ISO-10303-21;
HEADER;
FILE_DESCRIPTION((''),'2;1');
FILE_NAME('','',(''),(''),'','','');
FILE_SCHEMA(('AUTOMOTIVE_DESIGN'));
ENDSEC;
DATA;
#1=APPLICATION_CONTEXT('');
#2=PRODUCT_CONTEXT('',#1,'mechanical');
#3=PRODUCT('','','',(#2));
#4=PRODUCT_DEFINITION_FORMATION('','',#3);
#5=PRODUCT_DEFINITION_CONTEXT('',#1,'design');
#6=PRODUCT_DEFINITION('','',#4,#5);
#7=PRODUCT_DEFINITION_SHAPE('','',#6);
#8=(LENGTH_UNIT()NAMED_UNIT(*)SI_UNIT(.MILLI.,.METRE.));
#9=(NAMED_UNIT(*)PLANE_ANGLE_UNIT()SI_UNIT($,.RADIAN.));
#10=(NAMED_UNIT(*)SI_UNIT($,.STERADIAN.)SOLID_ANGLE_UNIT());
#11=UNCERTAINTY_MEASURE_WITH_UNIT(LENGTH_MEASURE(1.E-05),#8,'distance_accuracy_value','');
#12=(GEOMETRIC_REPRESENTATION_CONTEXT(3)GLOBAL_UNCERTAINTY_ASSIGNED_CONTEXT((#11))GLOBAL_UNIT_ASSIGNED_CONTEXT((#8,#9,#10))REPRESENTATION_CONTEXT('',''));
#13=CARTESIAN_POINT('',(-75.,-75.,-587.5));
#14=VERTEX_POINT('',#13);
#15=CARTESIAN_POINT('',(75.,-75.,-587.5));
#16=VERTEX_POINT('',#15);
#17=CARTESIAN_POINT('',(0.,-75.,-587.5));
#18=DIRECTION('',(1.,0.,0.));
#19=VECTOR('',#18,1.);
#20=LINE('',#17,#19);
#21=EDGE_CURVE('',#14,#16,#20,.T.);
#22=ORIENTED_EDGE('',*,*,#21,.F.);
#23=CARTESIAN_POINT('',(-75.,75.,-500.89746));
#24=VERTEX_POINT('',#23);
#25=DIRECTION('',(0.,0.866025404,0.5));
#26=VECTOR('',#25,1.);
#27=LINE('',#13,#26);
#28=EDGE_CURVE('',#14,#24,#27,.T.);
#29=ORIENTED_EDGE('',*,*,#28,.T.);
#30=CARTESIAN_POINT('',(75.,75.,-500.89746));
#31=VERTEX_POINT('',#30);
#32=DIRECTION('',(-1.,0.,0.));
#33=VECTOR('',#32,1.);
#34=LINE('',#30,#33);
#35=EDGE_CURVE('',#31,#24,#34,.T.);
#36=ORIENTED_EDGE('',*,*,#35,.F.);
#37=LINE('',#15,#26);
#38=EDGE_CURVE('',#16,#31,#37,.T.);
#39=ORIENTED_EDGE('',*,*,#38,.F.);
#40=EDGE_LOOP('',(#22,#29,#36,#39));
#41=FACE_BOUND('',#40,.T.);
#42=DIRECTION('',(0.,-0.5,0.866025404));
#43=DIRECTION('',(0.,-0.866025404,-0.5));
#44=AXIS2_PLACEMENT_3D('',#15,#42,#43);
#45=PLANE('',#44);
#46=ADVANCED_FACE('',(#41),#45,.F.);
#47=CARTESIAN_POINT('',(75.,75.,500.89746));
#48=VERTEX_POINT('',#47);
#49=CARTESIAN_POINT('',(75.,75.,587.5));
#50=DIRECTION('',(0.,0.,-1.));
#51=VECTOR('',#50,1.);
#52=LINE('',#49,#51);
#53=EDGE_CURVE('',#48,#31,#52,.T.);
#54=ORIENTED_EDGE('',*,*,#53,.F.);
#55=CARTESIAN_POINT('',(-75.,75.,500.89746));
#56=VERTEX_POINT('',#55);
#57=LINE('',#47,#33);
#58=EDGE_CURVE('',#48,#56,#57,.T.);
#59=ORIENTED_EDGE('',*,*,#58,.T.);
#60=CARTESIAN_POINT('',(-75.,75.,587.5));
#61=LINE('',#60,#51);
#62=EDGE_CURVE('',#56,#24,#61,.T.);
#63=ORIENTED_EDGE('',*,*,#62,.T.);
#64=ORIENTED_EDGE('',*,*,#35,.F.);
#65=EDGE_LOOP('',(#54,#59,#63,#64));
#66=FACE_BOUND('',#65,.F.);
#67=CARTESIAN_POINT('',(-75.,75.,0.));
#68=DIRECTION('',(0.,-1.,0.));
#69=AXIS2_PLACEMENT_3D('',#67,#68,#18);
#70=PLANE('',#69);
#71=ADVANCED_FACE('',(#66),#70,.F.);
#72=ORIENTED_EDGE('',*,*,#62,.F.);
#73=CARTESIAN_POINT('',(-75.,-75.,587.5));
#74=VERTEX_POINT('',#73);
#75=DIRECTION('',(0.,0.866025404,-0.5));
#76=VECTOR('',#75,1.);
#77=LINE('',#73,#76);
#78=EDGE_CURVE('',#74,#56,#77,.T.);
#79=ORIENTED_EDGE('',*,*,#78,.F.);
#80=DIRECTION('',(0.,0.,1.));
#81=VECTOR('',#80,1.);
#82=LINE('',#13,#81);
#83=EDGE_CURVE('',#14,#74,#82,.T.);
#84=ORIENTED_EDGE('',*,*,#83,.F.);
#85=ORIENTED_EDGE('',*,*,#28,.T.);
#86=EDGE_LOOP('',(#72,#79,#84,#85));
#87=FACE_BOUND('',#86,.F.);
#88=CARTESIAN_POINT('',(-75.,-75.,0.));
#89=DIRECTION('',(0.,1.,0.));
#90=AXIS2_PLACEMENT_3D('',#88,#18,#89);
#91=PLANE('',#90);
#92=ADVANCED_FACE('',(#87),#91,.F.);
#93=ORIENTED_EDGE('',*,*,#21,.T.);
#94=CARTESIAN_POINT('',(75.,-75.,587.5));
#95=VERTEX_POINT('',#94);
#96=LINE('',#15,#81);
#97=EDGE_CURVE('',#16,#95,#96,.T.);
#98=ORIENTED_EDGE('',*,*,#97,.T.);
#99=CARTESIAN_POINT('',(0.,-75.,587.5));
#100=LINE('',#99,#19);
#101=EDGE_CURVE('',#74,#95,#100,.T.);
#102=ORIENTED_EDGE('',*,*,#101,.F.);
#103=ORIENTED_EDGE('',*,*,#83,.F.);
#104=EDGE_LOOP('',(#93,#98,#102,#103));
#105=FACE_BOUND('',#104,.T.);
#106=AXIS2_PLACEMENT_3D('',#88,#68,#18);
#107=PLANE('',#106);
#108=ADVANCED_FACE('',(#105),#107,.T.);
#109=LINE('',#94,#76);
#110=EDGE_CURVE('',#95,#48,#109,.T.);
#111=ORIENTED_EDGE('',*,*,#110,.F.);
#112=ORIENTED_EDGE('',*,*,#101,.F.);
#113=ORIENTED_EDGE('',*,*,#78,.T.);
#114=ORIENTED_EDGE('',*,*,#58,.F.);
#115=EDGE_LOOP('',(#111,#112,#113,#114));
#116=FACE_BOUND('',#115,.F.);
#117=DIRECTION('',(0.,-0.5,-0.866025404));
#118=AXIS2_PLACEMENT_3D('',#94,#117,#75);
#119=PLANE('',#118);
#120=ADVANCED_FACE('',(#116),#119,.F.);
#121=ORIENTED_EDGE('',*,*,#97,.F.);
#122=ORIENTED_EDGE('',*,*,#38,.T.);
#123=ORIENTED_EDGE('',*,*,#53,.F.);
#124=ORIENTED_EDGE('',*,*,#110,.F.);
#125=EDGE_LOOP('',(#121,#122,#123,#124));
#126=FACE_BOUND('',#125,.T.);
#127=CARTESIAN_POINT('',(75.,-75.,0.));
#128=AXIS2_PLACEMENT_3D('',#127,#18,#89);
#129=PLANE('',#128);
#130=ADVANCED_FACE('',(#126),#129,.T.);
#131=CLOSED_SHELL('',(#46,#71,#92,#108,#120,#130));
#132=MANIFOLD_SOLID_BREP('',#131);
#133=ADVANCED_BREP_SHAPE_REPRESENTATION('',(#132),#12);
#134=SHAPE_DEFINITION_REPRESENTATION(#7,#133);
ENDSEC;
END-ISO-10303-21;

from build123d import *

# Parameters (mm, degrees)
F0_W     = 150
F0_H     = 150
F1_DEPTH = 587.5
F3_DEPTH = 150


# Not quite as in the source:
# - a pattern or mirror of a feature is missing from the dataset's text; its kind, count and spacing are read off the source's solid


with BuildPart() as f1:
    # F0 (on Top) → F1 (new body, symmetric)
    with BuildSketch(Plane.XY):
        Rectangle(F0_W, F0_H)
    extrude(amount=F1_DEPTH, both=True)

    # F2 (on face) → F3 (cut, through all)
    with BuildSketch(Plane.YZ.offset(75)):
        Polygon((75, 587.5), (-75, 587.5), (75, 500.8974596216), align=None)
    f3 = extrude(amount=-F3_DEPTH, mode=Mode.SUBTRACT)

    # F3_copies: F3 across plane
    add(f3.mirror(Plane(origin=(0, 0, 0), x_dir=(-1, 0, 0), z_dir=(0, 0, -1))), mode=Mode.SUBTRACT)


solid = f1.part
